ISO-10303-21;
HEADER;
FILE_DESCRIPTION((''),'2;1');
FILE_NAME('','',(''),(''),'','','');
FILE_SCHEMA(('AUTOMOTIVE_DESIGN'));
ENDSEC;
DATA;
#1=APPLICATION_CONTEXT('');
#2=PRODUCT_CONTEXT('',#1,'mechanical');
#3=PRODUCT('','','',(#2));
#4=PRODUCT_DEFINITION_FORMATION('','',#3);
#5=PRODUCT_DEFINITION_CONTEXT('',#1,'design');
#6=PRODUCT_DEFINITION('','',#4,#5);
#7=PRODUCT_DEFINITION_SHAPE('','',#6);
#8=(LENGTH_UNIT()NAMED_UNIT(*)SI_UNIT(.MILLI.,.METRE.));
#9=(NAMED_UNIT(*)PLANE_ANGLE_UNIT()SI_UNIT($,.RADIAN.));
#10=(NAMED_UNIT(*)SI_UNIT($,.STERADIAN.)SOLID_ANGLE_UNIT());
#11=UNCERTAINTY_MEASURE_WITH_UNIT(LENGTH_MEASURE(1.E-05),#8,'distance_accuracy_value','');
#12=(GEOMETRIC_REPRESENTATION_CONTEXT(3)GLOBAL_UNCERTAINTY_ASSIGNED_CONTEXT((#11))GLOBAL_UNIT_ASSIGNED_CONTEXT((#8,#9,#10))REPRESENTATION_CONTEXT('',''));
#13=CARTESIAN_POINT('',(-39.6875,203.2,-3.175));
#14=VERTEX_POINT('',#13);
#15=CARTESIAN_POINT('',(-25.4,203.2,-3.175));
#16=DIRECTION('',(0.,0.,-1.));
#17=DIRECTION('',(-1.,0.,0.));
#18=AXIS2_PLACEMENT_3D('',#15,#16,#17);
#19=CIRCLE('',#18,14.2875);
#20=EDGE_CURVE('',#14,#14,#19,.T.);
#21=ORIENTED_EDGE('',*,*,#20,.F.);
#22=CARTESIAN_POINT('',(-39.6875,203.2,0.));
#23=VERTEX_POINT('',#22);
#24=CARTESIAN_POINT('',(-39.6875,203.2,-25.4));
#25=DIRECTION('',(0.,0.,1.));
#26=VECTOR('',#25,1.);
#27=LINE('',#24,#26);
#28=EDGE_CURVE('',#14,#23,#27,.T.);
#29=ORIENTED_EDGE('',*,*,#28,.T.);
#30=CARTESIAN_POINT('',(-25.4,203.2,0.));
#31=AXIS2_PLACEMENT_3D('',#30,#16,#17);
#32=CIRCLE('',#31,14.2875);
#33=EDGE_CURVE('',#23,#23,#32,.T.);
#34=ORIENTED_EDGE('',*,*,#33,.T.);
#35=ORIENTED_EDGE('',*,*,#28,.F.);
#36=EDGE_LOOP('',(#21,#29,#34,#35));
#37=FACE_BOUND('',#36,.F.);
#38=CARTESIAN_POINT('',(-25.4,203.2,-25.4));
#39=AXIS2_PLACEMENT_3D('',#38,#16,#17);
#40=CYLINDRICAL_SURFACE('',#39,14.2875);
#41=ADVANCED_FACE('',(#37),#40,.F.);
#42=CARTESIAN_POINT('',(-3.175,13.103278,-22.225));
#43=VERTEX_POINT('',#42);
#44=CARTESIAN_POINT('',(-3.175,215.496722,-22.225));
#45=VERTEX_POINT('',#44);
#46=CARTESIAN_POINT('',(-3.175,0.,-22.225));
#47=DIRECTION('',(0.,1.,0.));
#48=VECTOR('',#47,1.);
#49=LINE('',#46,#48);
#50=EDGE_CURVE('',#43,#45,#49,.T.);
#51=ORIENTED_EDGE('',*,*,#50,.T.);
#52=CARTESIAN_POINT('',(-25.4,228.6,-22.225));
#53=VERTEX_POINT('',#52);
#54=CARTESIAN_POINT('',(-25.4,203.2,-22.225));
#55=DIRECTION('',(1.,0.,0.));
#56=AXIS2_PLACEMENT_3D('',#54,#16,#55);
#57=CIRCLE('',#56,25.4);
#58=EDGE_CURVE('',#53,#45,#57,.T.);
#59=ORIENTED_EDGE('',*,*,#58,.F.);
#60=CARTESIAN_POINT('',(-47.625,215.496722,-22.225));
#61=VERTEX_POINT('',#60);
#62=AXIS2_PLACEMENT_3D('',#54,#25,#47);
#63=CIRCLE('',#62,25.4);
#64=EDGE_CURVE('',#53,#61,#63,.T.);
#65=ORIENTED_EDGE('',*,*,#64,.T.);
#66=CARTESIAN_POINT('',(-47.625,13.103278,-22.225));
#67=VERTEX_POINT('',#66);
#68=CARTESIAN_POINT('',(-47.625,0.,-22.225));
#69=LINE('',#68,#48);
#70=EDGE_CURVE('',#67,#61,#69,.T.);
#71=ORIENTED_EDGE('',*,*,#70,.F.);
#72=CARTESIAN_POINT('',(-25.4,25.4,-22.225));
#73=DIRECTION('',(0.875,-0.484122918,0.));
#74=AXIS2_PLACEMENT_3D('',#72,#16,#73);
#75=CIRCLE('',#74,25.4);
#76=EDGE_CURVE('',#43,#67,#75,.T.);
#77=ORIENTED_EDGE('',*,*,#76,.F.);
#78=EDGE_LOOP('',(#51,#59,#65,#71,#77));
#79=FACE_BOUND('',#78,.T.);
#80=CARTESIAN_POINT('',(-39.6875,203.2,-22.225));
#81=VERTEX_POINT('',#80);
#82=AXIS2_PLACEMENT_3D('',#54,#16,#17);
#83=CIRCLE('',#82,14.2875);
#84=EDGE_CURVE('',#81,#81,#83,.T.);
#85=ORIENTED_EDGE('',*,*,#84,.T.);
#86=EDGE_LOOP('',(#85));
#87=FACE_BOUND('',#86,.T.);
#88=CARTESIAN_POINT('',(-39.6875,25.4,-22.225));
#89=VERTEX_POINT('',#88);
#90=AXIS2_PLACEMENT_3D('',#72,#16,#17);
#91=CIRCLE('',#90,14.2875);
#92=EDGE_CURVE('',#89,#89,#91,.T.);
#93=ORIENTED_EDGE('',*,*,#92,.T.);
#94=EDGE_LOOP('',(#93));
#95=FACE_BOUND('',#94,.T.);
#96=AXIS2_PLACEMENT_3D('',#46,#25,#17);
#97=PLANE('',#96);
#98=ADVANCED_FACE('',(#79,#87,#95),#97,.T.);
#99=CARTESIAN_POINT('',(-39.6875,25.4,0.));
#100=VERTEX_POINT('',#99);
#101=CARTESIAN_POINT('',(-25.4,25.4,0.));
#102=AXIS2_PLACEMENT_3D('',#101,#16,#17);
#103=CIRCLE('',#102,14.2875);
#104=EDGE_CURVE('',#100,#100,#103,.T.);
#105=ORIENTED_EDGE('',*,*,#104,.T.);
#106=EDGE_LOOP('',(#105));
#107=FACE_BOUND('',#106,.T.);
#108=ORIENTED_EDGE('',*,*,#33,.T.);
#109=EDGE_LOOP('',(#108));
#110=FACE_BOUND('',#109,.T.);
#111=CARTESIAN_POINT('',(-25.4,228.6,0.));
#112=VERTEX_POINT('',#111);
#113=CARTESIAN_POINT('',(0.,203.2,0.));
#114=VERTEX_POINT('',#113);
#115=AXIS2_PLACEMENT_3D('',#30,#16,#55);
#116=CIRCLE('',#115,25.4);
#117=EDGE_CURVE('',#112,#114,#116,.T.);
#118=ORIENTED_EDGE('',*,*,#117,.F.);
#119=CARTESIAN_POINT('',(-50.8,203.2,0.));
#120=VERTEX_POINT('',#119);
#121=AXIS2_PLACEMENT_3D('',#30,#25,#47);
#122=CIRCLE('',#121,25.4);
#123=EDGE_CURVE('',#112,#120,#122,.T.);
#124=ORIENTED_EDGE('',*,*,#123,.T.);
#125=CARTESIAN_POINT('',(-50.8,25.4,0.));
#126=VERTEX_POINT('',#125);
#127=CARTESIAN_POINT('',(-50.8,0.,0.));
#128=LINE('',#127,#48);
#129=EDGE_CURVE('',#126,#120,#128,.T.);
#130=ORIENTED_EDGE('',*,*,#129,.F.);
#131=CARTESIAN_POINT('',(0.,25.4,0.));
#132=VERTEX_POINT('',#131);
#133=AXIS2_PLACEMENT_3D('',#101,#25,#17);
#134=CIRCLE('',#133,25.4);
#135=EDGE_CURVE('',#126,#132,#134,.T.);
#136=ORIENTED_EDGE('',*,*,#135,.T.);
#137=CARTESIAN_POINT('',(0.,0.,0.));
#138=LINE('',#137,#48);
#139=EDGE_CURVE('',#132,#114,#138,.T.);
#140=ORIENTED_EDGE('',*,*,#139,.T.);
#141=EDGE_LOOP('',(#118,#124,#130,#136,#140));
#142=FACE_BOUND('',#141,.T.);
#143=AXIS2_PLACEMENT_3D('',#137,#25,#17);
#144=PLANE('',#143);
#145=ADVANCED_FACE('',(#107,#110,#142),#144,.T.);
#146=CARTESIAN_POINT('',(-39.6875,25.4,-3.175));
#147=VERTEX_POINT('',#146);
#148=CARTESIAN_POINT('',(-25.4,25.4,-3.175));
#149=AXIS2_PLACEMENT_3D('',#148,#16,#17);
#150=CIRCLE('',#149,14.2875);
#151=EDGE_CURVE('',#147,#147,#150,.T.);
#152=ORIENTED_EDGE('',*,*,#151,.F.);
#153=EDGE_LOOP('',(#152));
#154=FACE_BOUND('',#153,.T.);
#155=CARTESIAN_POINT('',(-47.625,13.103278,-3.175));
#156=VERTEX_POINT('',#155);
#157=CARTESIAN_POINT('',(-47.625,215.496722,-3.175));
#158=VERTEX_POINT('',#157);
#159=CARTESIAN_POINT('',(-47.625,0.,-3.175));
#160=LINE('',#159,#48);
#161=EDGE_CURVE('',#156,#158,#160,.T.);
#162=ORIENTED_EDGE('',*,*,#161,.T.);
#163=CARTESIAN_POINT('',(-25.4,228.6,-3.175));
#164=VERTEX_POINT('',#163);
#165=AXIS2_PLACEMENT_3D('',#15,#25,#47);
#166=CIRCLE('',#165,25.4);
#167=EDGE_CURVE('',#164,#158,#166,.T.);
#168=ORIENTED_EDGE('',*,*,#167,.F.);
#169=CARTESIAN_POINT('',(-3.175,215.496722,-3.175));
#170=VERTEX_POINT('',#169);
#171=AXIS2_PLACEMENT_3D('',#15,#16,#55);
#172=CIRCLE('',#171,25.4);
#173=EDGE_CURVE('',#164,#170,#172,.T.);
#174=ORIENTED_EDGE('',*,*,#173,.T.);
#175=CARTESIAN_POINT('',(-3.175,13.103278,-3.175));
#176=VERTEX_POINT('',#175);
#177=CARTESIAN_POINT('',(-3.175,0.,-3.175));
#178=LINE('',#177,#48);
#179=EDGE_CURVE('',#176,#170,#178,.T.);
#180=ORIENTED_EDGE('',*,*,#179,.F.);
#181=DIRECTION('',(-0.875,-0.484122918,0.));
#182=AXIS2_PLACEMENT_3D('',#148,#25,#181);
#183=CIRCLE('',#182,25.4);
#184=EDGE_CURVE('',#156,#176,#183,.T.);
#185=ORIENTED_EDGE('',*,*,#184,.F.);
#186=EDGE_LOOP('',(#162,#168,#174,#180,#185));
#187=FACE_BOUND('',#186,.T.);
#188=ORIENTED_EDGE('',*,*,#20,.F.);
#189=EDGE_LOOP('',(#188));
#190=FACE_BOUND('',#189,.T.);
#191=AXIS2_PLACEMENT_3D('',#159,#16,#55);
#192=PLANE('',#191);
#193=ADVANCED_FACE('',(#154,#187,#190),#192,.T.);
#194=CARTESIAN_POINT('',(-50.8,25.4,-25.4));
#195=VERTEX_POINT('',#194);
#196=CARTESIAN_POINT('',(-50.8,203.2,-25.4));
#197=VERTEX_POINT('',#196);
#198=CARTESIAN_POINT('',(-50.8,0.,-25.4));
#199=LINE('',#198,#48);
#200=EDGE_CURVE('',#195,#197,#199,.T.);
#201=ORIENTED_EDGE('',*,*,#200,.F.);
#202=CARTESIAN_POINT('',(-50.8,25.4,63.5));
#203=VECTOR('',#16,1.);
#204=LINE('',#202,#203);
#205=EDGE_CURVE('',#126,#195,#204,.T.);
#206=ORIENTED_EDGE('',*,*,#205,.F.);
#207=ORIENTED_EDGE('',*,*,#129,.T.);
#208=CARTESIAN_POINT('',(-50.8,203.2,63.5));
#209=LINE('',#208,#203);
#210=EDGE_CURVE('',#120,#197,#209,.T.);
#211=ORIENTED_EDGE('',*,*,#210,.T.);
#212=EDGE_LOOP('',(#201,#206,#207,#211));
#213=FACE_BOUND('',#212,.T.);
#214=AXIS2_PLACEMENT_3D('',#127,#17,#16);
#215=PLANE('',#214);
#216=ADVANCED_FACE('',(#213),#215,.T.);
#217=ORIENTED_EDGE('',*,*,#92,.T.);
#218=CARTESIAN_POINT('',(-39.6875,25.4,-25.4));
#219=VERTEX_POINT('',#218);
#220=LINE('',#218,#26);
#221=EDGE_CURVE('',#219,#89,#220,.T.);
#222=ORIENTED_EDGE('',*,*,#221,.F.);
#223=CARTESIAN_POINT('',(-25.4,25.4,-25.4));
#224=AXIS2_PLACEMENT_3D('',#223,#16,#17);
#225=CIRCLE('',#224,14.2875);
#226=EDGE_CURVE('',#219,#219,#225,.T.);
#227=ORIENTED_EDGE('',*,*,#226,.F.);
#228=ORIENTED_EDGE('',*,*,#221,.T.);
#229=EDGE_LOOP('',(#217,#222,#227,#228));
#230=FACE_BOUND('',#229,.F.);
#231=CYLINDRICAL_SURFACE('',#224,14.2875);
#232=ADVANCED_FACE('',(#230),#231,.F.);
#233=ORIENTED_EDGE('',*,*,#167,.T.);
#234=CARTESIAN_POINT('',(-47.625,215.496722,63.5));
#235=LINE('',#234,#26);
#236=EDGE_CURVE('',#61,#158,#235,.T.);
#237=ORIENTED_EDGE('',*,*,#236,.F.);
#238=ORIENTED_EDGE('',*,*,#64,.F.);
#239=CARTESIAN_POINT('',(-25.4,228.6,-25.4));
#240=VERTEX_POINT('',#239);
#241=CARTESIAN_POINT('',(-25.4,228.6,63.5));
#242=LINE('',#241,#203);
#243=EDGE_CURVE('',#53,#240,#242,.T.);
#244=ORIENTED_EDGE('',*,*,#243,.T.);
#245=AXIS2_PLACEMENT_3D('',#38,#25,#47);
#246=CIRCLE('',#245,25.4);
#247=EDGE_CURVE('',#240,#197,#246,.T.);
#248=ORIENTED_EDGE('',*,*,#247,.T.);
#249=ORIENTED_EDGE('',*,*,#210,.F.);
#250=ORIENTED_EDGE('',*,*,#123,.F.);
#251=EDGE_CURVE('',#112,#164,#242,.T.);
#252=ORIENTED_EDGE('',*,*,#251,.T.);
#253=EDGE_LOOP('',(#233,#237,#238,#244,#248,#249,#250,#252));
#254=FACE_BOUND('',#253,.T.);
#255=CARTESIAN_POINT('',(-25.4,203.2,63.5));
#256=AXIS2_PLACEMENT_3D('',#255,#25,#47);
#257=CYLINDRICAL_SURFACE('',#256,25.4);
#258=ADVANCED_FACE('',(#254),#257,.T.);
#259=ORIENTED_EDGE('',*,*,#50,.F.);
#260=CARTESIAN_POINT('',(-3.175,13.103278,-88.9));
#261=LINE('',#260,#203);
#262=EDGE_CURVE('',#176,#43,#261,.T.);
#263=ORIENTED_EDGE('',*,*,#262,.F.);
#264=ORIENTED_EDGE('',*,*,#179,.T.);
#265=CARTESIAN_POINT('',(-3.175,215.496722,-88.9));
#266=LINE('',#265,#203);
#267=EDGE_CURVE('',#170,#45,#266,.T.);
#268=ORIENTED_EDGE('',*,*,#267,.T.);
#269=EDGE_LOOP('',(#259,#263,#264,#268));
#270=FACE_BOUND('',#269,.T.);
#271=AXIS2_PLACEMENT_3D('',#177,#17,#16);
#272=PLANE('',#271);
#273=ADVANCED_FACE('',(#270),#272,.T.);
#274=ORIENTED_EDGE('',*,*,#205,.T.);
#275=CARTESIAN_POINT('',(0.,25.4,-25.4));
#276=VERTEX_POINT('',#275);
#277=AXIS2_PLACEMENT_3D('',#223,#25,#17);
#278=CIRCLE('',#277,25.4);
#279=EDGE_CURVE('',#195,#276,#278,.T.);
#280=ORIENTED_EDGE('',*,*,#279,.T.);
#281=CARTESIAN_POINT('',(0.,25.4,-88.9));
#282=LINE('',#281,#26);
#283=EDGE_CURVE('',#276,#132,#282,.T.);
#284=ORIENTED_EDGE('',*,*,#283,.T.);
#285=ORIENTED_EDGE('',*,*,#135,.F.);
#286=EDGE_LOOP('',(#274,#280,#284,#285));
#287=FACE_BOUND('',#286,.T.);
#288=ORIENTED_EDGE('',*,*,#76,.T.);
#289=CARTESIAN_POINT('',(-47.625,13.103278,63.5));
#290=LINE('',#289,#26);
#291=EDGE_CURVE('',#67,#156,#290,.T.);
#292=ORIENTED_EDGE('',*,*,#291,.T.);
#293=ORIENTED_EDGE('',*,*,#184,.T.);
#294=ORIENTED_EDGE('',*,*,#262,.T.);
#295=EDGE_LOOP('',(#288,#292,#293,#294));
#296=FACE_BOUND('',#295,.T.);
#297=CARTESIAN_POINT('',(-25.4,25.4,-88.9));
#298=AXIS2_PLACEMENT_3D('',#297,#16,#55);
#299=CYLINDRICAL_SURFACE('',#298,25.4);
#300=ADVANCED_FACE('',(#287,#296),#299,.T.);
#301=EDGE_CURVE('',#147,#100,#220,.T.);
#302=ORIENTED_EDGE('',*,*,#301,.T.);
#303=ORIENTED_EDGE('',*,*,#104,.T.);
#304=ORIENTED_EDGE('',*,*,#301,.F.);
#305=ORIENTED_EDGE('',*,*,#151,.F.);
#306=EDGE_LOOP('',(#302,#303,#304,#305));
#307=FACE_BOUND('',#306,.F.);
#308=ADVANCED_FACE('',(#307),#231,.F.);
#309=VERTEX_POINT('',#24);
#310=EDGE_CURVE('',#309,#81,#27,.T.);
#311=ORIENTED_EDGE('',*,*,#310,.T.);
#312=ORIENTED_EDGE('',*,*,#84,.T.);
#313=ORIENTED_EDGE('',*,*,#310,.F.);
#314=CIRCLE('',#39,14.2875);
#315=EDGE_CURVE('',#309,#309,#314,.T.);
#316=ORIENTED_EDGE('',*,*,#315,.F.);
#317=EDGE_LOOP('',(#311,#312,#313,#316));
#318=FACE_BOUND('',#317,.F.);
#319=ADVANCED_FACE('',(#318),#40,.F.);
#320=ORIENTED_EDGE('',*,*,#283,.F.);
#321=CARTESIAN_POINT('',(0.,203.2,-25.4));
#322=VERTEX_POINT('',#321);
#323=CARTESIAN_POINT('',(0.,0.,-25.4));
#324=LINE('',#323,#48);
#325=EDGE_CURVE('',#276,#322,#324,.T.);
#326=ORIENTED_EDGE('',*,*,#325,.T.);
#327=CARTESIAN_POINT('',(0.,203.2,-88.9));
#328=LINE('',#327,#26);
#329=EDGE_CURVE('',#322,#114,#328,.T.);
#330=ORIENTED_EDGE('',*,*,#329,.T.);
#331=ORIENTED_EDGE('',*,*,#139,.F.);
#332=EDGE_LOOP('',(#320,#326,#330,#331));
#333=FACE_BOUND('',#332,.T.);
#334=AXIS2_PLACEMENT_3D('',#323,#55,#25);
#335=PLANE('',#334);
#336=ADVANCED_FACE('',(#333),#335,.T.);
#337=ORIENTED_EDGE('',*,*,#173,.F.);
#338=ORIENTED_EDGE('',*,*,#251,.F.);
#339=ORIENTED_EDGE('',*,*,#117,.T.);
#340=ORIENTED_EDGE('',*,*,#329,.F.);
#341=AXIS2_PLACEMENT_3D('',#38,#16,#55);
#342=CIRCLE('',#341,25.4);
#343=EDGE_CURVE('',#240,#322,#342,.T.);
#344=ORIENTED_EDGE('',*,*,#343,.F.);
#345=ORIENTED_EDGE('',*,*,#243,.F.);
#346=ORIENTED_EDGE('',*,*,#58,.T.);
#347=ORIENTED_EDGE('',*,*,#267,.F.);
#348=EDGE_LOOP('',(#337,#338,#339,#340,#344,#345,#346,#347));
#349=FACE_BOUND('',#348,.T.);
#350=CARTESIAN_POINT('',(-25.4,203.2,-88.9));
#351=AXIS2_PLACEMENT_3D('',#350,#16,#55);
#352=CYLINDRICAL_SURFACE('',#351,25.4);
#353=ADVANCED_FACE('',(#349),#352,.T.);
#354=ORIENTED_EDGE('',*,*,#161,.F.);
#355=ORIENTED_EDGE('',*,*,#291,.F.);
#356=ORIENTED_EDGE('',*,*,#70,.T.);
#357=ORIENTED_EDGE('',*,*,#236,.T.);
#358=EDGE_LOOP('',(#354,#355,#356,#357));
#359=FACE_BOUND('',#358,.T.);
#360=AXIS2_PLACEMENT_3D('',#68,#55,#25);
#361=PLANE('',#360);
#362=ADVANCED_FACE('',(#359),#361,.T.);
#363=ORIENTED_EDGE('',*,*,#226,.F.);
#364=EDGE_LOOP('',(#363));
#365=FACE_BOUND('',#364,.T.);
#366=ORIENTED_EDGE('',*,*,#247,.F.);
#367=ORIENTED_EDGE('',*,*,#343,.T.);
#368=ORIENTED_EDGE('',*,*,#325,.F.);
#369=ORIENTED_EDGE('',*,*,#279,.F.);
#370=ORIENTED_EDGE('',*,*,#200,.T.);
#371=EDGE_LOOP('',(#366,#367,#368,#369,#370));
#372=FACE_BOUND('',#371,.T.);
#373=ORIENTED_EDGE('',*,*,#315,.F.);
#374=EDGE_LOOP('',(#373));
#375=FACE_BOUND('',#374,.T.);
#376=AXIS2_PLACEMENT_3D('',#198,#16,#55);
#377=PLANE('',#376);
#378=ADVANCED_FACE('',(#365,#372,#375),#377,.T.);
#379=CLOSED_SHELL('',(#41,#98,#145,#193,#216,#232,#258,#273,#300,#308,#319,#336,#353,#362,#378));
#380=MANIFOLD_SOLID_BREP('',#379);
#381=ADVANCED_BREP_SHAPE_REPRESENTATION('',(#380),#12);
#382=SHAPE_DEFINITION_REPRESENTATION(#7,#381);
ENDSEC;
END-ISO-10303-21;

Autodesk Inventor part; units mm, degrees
ref_plane "YZ Plane" through (0, 0, 0) normal (1, 0, 0) x (0, 1, 0)
ref_plane "XZ Plane" through (0, 0, 0) normal (0, 1, 0) x (-1, 0, 0)
ref_plane "XY Plane" through (0, 0, 0) normal (0, 0, 1) x (1, 0, 0)
sketch "Sketch1" plane through (0, 0, 0) normal (0, 1, 0) x (-1, 0, 0)
  line L0 (0, 0) -> (50.8, 0)
  line L1 (50.8, 0) -> (50.8, -25.4)
  line L2 (50.8, -25.4) -> (0, -25.4)
  line L3 (0, -25.4) -> (0, 0)
  line L4 (47.625, -22.225) -> (47.625, -3.175)
  line L5 (47.625, -3.175) -> (3.175, -3.175)
  line L6 (3.175, -3.175) -> (3.175, -22.225)
  line L7 (3.175, -22.225) -> (47.625, -22.225)
  dimension "d0" = 50.8
  dimension "d1" = 25.4
  dimension "d2" = 3.175
extrude "Extrusion1" add sketch "Sketch1" along normal blind 228.6
sketch "Sketch2" plane through (0, 0, -25.4) normal (0, 0, -1) x (-1, 0, 0)
  line L0 (50.8, 0) -> (0, 0) projected
  line L1 (50.8, 0) -> (50.8, 228.6) projected
  line L2 (0, 228.6) -> (50.8, 228.6) projected
  line L3 (0, 0) -> (0, 228.6) projected
  circle A0 centre (25.4, 203.2) radius 14.2875
  circle A1 centre (25.4, 25.4) radius 14.2875
  dimension "d5" = 25.4
  dimension "d6" = 25.4
  dimension "d7" = 28.575
  dimension "d8" = 25.4
  dimension "d9" = 25.4
  dimension "d10" = 28.575
extrude "Extrusion2" cut sketch "Sketch2" against normal through all contours A0 | A1
fillet "Fillet1" radius 25.4 4 edges at (-50.8, 228.6, -12.7) (0, 228.6, -12.7) (-50.8, 0, -12.7) (0, 0, -12.7)
properties part number "WristBarr.ver1-1111-2020"
